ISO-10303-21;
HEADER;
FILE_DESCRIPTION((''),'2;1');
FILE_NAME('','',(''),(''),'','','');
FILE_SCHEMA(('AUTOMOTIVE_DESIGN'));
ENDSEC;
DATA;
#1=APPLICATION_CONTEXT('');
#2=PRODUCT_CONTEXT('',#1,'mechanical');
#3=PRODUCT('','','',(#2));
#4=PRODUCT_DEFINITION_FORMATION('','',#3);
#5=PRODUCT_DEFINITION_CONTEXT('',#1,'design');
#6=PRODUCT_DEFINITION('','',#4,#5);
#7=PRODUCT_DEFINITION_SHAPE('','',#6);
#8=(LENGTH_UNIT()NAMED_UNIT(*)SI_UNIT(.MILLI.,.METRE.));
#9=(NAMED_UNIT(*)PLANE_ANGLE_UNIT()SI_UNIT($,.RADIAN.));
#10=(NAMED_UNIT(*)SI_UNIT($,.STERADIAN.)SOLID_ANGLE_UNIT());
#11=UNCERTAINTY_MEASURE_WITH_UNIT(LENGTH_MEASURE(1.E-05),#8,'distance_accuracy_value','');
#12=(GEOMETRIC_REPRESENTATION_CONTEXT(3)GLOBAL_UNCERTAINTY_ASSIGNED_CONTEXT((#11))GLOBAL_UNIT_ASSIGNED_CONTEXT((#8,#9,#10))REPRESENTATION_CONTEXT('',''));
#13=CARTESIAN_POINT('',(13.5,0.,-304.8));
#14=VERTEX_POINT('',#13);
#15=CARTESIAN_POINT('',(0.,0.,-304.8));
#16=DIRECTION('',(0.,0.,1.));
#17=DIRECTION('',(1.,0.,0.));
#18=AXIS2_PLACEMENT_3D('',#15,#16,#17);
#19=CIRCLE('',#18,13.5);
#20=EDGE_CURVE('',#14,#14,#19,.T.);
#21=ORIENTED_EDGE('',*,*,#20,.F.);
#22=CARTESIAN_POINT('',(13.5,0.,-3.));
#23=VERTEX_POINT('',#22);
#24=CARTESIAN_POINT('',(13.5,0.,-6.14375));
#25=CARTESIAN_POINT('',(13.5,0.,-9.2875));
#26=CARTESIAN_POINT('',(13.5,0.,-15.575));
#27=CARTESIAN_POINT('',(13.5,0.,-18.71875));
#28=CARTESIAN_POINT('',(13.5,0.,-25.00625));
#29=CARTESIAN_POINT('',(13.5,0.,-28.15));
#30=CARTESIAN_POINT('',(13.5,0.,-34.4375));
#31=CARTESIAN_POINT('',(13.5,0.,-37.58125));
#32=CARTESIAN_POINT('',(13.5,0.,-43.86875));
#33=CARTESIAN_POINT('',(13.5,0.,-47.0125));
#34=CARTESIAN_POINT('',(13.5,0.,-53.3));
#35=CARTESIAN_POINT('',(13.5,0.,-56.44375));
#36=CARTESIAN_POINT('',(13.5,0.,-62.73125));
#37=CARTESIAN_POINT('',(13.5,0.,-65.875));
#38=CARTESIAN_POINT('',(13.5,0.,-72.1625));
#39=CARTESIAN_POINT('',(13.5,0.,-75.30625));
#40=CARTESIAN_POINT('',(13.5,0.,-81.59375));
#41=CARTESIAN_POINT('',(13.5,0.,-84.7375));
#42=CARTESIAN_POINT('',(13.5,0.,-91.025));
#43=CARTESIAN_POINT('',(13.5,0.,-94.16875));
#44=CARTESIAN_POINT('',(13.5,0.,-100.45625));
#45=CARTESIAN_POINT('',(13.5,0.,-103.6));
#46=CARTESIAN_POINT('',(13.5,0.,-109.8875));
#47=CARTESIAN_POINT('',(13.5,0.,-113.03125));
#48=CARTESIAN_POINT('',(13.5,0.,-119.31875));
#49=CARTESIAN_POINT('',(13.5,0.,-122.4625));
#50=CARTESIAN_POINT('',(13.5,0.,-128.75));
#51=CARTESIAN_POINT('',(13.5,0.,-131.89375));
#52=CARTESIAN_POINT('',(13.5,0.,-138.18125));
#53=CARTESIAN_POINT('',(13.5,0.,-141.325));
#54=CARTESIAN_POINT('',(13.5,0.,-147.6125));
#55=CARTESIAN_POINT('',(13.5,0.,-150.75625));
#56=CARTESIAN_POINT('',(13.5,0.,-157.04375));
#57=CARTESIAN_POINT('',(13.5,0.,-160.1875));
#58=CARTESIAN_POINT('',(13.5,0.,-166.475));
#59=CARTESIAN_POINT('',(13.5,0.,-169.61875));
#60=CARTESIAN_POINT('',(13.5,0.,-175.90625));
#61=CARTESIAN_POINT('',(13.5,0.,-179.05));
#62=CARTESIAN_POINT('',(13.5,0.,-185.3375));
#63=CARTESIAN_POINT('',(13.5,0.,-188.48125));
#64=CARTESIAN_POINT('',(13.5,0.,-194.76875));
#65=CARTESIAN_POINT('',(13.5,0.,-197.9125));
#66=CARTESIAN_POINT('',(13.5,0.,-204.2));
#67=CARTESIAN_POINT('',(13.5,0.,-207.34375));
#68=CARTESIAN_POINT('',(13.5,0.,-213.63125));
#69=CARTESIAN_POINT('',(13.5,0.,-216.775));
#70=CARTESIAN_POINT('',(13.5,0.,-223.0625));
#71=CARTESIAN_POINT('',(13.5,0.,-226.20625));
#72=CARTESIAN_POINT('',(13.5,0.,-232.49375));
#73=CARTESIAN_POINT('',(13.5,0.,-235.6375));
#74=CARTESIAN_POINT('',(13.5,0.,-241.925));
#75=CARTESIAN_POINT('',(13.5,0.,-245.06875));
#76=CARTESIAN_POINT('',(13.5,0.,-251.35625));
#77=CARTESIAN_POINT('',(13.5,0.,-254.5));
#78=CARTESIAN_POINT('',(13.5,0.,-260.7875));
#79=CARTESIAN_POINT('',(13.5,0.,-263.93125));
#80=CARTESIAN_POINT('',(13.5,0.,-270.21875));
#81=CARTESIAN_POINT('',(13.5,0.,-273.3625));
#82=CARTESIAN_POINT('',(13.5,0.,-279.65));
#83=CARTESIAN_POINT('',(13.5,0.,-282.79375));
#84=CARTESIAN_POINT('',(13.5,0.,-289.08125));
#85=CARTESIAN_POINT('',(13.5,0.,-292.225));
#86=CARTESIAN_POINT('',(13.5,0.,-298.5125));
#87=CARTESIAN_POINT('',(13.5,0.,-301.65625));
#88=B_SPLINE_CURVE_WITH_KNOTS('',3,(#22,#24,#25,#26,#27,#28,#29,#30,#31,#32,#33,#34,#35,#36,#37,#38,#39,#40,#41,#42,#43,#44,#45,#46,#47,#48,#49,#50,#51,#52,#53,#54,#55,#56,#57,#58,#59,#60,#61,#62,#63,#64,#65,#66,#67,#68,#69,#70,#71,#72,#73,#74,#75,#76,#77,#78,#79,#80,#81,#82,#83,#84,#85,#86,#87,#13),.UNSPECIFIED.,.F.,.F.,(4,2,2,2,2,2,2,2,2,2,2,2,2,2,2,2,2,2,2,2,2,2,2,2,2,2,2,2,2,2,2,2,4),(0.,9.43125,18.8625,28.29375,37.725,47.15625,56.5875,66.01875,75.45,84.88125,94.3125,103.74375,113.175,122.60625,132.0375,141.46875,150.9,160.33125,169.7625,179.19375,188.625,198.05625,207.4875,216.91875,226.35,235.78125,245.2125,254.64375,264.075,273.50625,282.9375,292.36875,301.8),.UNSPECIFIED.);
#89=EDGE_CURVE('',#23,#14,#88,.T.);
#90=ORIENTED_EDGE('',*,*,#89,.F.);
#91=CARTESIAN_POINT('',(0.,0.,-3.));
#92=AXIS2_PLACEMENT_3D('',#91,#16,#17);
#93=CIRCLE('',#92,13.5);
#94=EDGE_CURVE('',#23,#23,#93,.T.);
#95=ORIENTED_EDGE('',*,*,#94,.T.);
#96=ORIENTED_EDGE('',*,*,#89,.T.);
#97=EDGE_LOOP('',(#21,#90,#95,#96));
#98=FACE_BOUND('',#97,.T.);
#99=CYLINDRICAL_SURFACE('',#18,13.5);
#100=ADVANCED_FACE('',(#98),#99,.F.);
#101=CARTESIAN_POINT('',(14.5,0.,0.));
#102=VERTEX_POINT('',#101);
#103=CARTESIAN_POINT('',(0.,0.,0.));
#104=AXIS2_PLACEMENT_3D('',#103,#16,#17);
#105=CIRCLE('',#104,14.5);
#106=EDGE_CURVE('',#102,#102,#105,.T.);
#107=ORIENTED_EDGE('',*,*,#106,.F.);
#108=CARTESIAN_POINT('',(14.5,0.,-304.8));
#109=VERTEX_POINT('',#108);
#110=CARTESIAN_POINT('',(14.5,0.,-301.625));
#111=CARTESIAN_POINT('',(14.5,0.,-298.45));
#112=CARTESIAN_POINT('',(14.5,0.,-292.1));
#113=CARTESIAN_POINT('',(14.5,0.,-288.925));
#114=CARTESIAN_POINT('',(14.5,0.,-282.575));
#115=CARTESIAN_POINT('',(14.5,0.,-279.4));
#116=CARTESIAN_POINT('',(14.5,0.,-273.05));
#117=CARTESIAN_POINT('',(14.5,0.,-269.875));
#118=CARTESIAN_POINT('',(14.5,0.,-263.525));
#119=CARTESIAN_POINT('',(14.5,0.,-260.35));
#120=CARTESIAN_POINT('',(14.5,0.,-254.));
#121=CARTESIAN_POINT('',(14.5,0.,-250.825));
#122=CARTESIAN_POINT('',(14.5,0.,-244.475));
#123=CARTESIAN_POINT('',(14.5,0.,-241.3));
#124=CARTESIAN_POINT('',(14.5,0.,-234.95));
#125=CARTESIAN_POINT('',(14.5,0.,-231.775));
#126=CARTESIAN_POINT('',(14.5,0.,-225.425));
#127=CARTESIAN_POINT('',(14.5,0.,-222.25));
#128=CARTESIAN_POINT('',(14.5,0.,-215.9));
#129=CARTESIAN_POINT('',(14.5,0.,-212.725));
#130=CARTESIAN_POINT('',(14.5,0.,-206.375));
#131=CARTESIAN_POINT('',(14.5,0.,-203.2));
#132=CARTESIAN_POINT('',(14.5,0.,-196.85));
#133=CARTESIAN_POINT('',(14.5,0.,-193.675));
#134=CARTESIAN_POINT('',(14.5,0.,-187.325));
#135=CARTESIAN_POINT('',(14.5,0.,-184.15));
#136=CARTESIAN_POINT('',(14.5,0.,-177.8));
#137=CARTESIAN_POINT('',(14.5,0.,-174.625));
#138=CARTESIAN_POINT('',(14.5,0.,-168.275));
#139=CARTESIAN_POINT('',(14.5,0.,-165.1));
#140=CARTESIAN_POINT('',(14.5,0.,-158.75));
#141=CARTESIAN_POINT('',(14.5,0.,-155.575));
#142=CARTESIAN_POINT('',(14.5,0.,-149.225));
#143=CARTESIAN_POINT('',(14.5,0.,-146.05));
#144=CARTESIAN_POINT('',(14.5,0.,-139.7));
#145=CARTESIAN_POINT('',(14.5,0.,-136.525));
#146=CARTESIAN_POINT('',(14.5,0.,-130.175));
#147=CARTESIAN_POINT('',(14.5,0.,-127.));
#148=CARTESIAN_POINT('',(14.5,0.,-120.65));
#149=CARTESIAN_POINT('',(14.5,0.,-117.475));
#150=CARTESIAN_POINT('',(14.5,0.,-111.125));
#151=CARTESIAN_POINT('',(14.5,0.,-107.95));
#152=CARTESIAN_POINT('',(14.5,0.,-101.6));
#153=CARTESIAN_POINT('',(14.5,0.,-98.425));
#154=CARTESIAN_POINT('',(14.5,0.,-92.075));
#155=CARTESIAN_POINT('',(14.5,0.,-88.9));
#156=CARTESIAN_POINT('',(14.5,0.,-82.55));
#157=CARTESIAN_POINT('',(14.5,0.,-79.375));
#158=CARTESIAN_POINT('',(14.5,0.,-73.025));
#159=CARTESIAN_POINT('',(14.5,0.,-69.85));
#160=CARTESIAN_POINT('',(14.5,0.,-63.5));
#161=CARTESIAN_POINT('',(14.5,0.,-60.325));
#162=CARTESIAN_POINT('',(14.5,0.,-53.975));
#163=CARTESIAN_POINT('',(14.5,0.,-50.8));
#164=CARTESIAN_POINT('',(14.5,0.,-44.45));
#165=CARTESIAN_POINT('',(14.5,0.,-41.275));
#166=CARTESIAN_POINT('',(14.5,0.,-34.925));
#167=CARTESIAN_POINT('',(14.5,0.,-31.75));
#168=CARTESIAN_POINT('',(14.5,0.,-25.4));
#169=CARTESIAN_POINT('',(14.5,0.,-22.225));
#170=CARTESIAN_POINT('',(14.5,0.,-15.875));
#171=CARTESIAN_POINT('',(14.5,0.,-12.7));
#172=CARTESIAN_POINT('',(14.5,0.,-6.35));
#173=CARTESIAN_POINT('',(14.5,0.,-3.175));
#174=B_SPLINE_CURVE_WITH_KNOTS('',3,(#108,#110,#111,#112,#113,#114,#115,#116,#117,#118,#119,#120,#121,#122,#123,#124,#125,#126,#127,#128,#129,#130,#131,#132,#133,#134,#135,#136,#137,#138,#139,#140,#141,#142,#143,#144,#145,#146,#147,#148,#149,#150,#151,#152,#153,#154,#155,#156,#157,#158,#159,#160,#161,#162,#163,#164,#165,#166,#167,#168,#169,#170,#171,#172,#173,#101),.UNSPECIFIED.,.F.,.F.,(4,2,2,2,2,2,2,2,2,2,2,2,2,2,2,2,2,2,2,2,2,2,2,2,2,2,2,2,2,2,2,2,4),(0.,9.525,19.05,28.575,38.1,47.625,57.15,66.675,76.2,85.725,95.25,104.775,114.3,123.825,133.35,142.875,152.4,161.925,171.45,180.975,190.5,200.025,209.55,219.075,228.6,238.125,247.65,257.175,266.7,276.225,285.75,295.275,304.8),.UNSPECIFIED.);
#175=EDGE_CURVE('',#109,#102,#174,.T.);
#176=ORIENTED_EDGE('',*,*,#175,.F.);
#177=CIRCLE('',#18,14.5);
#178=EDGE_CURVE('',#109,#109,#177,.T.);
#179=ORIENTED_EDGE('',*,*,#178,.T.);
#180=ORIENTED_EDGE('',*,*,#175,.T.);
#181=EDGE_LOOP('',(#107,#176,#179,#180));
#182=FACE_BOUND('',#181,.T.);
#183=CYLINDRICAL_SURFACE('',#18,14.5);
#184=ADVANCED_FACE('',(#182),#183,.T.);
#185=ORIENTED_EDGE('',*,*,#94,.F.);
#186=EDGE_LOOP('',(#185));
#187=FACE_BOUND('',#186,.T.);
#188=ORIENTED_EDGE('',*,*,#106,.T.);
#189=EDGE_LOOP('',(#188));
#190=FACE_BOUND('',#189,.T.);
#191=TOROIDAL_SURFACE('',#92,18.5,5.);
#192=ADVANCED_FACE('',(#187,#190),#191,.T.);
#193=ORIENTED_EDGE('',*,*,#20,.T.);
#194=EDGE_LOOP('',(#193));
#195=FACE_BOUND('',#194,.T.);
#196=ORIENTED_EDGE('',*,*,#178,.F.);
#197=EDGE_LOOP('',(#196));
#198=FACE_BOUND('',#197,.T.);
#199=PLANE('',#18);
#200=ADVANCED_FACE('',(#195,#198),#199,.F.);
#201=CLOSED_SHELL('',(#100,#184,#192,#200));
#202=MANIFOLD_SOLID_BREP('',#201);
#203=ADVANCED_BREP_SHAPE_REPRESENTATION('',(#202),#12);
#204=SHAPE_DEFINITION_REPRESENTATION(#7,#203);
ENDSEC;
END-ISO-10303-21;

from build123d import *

# Parameters (mm, degrees)
SKETCH1_R           = 14.5
BOSS_EXTRUDE1_DEPTH = 304.8
SKETCH2_R           = 13.5
CUT_EXTRUDE1_DEPTH  = 304.8
FILLET3_R           = 5


with BuildPart() as part:
    # Sketch1 → Boss-Extrude1 (new body)
    with BuildSketch(Plane.XY):
        Circle(SKETCH1_R)
    extrude(amount=-BOSS_EXTRUDE1_DEPTH)

    # Sketch2 → Cut-Extrude1 (cut)
    with BuildSketch(Plane.XY):
        Circle(SKETCH2_R)
    extrude(amount=-CUT_EXTRUDE1_DEPTH, mode=Mode.SUBTRACT)

    # Fillet3
    # the kernel refuses this fillet: 5 mm, written as the material it takes off along each edge
    with BuildSketch(Plane(origin=(0, 0, 0), x_dir=(1, 0, 0), z_dir=(0, -1, 0))) as fillet3_piece_1:
        with BuildLine():
            CenterArc((18.5, -3), FILLET3_R, 143.130102354, 36.869897646)
            Line((13.5, -3), (13.4, -3))
            Line((13.4, -3), (13.4, 0))
            Line((13.4, 0), (13.5, 0.1))
            ThreePointArc((13.5, 0.1), (14, 0.1), (14.42, 0.06))
            Line((14.42, 0.06), (14.5, 0))
        make_face()
    revolve(axis=Axis((0, 0, 0), (0, 0, 1)), mode=Mode.SUBTRACT)


solid = part.part
